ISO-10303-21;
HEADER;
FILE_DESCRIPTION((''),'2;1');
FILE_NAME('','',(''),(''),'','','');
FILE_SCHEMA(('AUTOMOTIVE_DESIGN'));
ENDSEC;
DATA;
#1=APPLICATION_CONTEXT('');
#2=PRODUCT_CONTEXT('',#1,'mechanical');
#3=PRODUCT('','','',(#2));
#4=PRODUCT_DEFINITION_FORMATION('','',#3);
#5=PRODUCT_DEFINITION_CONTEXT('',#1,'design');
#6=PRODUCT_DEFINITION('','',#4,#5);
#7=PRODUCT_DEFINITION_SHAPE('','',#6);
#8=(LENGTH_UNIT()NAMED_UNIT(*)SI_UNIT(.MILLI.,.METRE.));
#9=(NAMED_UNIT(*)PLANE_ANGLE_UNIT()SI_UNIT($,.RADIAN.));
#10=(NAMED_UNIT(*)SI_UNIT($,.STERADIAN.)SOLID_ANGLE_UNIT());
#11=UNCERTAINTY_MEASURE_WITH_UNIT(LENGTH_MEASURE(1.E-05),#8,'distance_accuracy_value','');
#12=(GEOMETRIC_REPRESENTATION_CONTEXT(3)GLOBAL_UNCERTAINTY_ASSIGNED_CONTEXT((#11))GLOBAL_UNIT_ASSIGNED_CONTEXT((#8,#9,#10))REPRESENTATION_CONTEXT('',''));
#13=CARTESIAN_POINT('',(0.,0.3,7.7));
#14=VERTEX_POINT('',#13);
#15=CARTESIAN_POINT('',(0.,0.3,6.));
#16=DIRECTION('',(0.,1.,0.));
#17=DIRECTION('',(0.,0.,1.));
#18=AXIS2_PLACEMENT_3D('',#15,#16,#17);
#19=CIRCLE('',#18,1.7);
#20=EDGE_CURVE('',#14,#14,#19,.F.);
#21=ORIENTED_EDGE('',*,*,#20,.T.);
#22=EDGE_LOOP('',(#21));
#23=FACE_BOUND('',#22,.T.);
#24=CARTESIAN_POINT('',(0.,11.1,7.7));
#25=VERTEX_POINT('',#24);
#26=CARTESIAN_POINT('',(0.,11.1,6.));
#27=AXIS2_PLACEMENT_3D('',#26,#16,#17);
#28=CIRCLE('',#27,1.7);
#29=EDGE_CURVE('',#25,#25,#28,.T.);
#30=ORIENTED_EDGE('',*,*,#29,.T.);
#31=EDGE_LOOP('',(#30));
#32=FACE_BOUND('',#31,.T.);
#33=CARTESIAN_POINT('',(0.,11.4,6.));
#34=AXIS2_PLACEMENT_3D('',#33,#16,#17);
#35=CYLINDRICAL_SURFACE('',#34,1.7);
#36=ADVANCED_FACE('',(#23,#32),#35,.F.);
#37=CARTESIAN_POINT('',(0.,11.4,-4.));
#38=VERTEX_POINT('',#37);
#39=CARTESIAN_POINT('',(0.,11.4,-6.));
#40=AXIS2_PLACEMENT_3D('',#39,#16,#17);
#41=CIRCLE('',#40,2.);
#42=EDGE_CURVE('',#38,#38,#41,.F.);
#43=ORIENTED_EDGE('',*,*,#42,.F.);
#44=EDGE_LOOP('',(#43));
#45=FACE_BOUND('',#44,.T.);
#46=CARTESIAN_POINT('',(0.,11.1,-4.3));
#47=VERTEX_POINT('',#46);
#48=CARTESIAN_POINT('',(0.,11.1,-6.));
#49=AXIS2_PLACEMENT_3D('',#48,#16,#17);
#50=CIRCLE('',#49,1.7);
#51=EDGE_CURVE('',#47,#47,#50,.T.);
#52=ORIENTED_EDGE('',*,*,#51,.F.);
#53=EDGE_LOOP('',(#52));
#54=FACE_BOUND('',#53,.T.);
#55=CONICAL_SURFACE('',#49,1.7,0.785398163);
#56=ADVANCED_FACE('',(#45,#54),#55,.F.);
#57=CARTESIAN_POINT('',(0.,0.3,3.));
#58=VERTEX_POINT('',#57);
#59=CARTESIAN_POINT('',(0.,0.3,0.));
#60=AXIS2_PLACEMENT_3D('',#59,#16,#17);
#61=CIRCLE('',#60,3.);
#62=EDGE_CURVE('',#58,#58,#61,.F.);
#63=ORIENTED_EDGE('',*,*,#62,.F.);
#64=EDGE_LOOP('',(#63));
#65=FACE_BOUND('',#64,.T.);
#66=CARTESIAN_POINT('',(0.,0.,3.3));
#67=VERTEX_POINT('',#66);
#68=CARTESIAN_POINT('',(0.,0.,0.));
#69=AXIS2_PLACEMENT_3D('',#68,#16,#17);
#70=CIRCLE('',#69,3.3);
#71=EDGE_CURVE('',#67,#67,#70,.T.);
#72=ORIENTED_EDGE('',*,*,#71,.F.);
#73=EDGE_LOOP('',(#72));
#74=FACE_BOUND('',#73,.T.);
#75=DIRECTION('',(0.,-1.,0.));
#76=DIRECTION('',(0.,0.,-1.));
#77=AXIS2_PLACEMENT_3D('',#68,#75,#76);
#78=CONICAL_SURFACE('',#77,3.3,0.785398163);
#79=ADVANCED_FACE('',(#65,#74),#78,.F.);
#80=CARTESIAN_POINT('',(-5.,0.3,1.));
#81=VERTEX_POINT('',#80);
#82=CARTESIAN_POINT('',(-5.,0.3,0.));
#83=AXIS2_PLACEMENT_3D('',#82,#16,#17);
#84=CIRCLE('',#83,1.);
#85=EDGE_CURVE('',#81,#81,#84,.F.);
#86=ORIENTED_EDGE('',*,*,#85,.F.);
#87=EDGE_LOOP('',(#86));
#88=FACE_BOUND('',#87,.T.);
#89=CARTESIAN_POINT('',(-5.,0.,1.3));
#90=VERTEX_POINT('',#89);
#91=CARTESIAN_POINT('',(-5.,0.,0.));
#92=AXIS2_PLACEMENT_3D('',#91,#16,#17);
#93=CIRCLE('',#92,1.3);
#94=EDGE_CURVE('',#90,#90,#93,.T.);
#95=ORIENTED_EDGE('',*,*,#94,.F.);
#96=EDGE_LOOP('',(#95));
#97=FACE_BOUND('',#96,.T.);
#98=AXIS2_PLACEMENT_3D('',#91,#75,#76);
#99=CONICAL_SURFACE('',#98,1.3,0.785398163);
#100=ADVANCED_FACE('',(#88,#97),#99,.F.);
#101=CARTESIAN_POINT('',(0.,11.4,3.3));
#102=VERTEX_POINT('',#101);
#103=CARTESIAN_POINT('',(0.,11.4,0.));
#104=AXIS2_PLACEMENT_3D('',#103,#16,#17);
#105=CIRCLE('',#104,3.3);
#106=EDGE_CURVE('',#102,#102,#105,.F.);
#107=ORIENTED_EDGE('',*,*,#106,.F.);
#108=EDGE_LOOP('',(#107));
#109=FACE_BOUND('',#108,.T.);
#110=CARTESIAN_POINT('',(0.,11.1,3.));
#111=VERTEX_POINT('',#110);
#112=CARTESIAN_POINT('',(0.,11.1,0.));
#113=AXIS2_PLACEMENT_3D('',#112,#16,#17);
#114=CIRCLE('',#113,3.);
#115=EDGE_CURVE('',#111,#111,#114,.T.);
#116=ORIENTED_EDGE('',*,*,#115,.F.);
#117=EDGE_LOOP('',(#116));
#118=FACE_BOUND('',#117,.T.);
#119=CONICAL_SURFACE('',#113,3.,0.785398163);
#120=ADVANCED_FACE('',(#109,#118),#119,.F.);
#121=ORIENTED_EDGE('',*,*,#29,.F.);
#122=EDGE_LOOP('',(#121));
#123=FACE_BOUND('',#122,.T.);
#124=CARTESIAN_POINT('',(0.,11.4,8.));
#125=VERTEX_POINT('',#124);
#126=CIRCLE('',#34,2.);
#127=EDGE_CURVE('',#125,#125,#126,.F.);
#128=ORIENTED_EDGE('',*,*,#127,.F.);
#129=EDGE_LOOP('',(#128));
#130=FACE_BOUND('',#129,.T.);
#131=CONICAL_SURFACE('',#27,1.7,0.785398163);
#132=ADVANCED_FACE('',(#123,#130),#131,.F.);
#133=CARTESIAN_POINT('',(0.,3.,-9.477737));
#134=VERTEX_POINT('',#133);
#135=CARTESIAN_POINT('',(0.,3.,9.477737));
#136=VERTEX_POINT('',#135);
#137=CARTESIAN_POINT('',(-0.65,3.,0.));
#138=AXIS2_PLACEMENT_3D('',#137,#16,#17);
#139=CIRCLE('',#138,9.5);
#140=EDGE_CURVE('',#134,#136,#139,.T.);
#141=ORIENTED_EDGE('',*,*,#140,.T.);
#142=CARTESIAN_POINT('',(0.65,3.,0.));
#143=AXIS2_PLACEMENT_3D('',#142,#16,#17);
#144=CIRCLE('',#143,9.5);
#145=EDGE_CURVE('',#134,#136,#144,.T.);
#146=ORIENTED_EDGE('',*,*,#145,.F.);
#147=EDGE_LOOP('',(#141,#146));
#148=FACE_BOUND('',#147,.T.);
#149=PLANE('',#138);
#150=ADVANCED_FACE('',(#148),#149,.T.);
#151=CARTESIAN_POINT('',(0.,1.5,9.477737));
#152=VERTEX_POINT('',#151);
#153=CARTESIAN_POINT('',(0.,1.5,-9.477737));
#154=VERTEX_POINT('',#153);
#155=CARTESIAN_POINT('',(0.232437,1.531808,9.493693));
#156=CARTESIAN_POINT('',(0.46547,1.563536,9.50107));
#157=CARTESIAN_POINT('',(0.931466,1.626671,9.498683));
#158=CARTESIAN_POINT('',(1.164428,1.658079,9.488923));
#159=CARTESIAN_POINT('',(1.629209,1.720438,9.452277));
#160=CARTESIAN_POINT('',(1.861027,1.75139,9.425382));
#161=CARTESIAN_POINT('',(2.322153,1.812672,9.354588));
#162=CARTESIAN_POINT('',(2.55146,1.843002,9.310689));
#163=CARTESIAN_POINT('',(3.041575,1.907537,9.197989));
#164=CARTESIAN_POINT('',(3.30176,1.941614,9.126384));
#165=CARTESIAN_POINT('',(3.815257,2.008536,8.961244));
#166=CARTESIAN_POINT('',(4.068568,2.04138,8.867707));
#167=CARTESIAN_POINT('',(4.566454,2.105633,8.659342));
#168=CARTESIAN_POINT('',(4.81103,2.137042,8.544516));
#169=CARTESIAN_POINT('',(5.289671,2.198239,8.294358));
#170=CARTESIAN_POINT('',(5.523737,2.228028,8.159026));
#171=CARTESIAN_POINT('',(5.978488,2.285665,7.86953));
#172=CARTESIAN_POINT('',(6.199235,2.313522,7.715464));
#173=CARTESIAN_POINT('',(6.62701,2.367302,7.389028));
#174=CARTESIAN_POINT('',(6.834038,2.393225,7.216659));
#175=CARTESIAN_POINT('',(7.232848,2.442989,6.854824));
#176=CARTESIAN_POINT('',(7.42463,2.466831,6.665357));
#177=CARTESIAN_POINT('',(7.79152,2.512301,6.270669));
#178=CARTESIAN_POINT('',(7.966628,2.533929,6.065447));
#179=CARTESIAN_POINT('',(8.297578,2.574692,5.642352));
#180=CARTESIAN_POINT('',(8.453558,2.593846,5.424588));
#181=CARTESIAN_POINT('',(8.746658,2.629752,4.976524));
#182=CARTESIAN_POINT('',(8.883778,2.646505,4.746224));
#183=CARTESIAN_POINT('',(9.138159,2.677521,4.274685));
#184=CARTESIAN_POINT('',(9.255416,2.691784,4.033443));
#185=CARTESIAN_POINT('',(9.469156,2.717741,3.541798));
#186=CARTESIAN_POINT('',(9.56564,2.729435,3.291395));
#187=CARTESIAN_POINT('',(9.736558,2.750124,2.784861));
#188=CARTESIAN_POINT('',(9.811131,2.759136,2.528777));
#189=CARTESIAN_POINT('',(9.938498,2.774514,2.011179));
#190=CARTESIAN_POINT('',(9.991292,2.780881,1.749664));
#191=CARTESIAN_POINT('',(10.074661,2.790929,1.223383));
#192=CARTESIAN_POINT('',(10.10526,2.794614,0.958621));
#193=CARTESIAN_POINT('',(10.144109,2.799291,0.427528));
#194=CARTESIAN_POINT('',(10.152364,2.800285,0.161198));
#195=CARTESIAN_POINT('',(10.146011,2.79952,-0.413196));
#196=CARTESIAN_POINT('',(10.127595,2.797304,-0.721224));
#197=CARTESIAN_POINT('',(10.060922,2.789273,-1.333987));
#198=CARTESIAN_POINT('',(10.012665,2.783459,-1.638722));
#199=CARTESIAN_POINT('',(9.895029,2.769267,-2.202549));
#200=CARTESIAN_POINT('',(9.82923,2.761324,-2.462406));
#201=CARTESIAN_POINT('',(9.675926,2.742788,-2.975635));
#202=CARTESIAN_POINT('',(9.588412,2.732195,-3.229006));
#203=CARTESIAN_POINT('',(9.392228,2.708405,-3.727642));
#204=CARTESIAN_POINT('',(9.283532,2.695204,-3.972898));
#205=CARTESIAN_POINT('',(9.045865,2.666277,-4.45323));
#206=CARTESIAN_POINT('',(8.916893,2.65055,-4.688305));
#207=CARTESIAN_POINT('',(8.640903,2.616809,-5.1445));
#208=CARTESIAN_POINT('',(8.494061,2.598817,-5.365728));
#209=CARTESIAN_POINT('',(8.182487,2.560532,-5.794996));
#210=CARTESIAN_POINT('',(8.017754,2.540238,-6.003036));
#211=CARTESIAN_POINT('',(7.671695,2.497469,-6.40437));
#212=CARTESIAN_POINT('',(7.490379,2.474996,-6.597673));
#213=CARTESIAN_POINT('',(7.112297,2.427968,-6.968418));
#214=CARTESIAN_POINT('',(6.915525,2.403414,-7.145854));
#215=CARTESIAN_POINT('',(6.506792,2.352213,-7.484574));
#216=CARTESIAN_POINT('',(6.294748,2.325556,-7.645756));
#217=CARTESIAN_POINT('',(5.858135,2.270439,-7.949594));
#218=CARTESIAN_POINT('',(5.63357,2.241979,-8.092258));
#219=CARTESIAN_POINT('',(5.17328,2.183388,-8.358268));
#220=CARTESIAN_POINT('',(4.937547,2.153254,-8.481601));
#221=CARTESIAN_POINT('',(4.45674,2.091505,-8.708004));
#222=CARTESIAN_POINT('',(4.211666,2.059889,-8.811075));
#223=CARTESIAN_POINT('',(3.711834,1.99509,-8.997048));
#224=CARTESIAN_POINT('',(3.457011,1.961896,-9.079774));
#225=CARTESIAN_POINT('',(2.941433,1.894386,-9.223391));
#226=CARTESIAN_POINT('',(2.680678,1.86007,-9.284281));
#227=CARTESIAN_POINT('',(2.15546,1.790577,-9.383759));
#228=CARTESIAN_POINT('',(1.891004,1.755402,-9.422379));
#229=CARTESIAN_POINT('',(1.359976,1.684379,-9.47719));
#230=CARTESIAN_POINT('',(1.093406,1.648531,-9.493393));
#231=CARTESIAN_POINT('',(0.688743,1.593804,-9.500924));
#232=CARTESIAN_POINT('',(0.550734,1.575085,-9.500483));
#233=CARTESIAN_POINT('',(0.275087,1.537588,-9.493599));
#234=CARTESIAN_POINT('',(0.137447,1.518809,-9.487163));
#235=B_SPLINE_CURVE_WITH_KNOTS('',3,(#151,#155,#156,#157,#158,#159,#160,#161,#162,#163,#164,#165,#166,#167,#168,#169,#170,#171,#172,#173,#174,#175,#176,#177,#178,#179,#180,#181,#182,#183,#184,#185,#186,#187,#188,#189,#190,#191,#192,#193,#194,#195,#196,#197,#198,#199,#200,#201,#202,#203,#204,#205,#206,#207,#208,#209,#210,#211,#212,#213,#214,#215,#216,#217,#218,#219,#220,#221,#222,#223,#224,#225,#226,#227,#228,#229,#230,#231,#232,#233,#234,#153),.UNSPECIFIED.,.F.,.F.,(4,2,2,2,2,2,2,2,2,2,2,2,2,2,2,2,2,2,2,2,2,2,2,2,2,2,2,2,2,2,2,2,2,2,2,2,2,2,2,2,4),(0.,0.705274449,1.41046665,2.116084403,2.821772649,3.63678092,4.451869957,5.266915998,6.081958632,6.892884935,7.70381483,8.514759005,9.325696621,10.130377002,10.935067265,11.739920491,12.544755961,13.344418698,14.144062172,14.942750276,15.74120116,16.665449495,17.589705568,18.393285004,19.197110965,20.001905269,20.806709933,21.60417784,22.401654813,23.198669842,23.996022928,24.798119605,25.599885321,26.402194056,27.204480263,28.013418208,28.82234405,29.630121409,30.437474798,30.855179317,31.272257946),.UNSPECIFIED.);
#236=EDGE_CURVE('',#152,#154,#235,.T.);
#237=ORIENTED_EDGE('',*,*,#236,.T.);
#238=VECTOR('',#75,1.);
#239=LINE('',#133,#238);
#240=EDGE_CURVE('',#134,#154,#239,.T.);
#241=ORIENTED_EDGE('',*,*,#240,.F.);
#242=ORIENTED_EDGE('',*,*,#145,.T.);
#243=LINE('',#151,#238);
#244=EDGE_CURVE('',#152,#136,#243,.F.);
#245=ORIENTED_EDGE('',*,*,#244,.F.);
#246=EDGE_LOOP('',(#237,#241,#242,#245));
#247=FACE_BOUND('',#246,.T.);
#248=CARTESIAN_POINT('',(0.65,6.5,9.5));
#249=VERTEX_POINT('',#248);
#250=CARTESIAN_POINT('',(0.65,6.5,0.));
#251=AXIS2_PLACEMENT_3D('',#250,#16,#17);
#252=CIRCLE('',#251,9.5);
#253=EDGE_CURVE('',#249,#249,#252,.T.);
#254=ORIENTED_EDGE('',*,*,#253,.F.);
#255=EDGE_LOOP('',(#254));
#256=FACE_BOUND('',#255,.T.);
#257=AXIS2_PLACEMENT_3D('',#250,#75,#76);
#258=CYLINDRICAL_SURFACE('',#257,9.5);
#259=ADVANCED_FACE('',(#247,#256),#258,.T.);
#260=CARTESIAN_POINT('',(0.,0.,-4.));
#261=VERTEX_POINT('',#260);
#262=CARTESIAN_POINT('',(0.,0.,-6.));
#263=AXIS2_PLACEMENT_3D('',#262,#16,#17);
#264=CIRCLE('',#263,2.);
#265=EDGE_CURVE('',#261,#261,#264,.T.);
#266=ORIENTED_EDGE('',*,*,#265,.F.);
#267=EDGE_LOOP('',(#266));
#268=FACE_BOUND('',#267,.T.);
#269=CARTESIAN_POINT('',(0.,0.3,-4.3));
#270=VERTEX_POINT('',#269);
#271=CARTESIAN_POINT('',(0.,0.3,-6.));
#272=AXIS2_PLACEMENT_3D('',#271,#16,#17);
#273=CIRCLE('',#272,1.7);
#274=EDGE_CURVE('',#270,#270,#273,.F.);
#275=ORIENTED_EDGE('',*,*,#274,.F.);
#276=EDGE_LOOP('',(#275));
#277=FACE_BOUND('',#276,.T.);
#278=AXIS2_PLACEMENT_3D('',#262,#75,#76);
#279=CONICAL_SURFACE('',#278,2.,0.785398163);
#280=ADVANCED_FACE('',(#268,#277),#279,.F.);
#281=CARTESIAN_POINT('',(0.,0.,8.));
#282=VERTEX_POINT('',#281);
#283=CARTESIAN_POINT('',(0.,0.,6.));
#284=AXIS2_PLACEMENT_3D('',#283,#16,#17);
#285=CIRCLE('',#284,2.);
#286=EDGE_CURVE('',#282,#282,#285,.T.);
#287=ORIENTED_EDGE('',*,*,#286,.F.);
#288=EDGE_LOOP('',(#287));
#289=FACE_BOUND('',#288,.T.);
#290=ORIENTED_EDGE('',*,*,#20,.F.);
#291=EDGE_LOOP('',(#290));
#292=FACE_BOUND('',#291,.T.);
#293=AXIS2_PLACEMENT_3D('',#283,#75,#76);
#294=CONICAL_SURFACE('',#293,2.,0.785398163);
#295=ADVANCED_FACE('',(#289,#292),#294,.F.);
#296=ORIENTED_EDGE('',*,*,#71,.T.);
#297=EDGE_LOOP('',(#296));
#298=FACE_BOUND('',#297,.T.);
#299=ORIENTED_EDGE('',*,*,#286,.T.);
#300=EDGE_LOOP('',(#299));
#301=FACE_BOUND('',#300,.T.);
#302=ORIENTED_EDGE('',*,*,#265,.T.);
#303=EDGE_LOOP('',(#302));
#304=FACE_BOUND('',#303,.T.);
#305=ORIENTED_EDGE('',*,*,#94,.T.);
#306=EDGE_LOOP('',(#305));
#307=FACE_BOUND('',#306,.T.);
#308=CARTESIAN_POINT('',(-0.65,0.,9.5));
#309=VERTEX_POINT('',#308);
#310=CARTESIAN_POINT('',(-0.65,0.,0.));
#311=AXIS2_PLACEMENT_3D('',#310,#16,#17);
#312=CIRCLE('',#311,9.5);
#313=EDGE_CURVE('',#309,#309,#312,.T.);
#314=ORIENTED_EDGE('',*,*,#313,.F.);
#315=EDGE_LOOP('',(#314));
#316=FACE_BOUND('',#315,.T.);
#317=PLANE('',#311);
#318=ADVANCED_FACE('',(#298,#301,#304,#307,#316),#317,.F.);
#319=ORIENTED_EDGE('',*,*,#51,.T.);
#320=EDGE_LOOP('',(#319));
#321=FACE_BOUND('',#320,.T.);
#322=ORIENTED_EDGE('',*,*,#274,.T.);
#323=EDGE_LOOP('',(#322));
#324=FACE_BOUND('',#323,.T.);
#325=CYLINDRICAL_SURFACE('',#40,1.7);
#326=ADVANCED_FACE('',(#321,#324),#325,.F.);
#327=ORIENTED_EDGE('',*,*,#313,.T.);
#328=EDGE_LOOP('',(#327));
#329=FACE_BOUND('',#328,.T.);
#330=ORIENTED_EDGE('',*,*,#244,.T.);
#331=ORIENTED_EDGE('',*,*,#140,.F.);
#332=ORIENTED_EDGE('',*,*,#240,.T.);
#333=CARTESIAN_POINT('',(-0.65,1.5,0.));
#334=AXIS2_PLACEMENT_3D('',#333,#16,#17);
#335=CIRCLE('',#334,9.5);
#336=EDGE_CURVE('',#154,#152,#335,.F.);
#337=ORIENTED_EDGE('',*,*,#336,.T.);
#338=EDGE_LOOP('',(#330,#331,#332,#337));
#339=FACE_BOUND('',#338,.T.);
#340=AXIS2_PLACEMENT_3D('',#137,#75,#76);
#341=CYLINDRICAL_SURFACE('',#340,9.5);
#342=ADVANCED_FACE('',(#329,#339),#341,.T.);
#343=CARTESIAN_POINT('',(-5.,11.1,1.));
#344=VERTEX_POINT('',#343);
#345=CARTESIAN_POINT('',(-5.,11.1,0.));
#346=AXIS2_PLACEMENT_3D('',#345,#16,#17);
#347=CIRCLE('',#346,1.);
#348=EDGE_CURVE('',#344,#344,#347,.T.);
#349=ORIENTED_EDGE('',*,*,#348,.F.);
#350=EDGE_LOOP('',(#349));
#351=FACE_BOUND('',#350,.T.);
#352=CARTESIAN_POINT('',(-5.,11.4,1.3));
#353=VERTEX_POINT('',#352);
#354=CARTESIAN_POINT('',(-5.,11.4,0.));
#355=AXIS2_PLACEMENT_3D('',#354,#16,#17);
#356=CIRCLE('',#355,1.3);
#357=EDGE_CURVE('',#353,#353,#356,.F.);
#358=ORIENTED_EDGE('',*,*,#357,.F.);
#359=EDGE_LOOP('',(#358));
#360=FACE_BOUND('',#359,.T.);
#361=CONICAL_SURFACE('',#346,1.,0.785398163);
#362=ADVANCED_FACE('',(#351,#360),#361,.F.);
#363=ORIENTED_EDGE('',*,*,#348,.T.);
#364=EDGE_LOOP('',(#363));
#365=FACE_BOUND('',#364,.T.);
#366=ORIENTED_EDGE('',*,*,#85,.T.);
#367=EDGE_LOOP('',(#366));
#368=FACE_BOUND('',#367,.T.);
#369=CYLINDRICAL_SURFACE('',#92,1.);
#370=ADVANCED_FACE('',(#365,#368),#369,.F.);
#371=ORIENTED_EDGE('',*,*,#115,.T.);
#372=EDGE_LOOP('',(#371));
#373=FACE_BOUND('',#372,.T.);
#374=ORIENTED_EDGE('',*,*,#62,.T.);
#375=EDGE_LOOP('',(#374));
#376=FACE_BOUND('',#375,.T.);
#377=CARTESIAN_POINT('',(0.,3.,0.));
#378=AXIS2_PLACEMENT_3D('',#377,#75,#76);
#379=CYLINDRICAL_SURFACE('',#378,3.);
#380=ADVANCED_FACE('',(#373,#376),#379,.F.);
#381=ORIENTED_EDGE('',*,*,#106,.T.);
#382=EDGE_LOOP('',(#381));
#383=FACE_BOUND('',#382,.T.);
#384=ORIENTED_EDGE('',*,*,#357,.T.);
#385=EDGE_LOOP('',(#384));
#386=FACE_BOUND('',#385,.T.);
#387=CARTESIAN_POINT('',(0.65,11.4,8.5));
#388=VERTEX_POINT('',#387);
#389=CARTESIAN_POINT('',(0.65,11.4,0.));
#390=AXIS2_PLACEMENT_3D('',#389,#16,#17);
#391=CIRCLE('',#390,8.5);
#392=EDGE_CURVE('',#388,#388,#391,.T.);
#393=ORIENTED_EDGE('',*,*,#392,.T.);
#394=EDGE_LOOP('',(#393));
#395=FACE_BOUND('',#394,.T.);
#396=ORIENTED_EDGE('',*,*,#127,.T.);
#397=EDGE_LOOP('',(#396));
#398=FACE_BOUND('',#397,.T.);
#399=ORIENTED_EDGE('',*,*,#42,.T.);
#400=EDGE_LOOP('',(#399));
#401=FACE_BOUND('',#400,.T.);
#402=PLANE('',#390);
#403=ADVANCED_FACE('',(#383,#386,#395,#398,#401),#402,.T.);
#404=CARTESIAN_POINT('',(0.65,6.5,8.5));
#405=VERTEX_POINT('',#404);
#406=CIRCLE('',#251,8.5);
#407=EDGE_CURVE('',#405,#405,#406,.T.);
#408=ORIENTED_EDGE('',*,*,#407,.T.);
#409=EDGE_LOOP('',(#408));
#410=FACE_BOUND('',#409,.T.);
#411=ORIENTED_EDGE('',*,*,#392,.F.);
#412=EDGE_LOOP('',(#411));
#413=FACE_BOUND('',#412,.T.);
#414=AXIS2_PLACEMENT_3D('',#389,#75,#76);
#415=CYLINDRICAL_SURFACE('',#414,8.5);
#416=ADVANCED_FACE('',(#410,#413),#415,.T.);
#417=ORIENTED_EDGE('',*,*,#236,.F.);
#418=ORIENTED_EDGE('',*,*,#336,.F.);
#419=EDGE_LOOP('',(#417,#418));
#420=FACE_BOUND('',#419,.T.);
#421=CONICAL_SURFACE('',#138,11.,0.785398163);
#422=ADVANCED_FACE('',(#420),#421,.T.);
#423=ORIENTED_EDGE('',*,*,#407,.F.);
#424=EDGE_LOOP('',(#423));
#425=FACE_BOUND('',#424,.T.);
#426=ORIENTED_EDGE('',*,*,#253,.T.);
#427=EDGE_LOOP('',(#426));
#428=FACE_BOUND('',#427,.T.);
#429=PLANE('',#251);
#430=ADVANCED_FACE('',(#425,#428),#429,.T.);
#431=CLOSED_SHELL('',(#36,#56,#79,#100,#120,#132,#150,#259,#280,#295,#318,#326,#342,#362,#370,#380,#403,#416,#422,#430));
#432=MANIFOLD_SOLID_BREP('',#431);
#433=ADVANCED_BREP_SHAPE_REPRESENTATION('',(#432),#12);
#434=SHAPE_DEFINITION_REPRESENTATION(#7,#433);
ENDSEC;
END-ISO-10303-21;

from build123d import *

# Parameters (mm, degrees)
SKETCH1_R            = 9.5
SKETCH1_R_2          = 3
BOSS_EXTRUDE1_DEPTH  = 3
SKETCH7_R            = 8.5
SKETCH7_R_2          = 3
BOSS_EXTRUDE5_DEPTH  = 8.4
SKETCH8_R            = 9.5
SKETCH8_R_2          = 8.5
BOSS_EXTRUDE6_DEPTH  = 3.5
CHAMFER1_SIZE        = 1.5
SKETCH12_R           = 3
SKETCH12_R_2         = 1
CUT_EXTRUDE4_DEPTH   = 18.978668035
M3_CLEARANCE_HOLE1_D = 3.4
CHAMFER2_SIZE        = 0.3


with BuildPart() as part:
    # Sketch1 → Boss-Extrude1 (new body)
    with BuildSketch(Plane(origin=(0, 0, 0), x_dir=(1, 0, 0), z_dir=(0, 1, 0))):
        with Locations(Location((-0.65, 0, 0), (0, 0, 270))):
            Circle(SKETCH1_R)
        with Locations(Location((0, 0, 0), (0, 0, 270))):
            Circle(SKETCH1_R_2, mode=Mode.SUBTRACT)
    extrude(amount=BOSS_EXTRUDE1_DEPTH)

    # Sketch7 → Boss-Extrude5 (add)
    with BuildSketch(Plane(origin=(0, 3, 0), x_dir=(1, 0, 0), z_dir=(0, 1, 0))):
        with Locations(Location((0.65, 0, 0), (0, 0, 42.437907805))):
            Circle(SKETCH7_R)
        with Locations(Location((0, 0, 0), (0, 0, 270))):
            Circle(SKETCH7_R_2, mode=Mode.SUBTRACT)
    extrude(amount=BOSS_EXTRUDE5_DEPTH)

    # Sketch8 → Boss-Extrude6 (add)
    with BuildSketch(Plane(origin=(0, 3, 0), x_dir=(1, 0, 0), z_dir=(0, 1, 0))):
        with Locations(Location((0.65, 0, 0), (0, 0, 93.923302734))):
            Circle(SKETCH8_R)
        with Locations(Location((0.65, 0, 0), (0, 0, 270))):
            Circle(SKETCH8_R_2, mode=Mode.SUBTRACT)
    extrude(amount=BOSS_EXTRUDE6_DEPTH)

    # Chamfer1
    # the kernel refuses this chamfer: 1.5 mm, written as the material it adds along each edge
    with BuildSketch(Plane(origin=(-0.65, 3, 0), x_dir=(-0.3317687677714116, 0, -0.9433607394477679), z_dir=(-0.9433607394477679, 0, 0.3317687677714116))) as chamfer1_piece_1_section:
        Polygon((9.5, CHAMFER1_SIZE), (9.5 + CHAMFER1_SIZE, 0), (9.5, 0), align=None)
    chamfer1_piece_1 = revolve(axis=Axis((-0.65, 3, 0), (0, -1, 0)), revolution_arc=218.752335407, mode=Mode.PRIVATE)
    chamfer1_piece_1 = chamfer1_piece_1 & Plane(origin=(0.65, 2.170447869, 0), x_dir=(-0.06842105263614455, 0, -0.9976565338613094), z_dir=(0, -1, 0)) * Cylinder(9.5, 44, mode=Mode.PRIVATE)
    add(chamfer1_piece_1)

    # Sketch12 → Cut-Extrude4 (cut, through all)
    with BuildSketch(Plane(origin=(0, 11.4, 0), x_dir=(1, 0, 0), z_dir=(0, 1, 0))):
        with Locations(Location((0, 0, 0), (0, 0, 270))):
            Circle(SKETCH12_R)
        with Locations(Location((-5, 0, 0), (0, 0, 270))):
            Circle(SKETCH12_R_2)
    extrude(amount=-CUT_EXTRUDE4_DEPTH, mode=Mode.SUBTRACT)

    # M3 Clearance Hole1 (through all)
    with Locations(Plane(origin=(0, 11.4, 0), x_dir=(1, 0, 0), z_dir=(0, 1, 0))):
        with Locations((0, 6), (0, -6)):
            Hole(M3_CLEARANCE_HOLE1_D / 2)

    # Chamfer2
    chamfer2_edges = [part.edges().sort_by_distance(p)[0] for p in [
        (0, 11.4, -3),
        (-5, 0, -1),
        (-5, 11.4, -1),
        (0, 0, -3),
        (1.7, 11.4, 6),
        (1.7, 0, 6),
        (1.7, 11.4, -6),
        (1.7, 0, -6),
    ]]
    chamfer(chamfer2_edges, length=CHAMFER2_SIZE)


solid = part.part
